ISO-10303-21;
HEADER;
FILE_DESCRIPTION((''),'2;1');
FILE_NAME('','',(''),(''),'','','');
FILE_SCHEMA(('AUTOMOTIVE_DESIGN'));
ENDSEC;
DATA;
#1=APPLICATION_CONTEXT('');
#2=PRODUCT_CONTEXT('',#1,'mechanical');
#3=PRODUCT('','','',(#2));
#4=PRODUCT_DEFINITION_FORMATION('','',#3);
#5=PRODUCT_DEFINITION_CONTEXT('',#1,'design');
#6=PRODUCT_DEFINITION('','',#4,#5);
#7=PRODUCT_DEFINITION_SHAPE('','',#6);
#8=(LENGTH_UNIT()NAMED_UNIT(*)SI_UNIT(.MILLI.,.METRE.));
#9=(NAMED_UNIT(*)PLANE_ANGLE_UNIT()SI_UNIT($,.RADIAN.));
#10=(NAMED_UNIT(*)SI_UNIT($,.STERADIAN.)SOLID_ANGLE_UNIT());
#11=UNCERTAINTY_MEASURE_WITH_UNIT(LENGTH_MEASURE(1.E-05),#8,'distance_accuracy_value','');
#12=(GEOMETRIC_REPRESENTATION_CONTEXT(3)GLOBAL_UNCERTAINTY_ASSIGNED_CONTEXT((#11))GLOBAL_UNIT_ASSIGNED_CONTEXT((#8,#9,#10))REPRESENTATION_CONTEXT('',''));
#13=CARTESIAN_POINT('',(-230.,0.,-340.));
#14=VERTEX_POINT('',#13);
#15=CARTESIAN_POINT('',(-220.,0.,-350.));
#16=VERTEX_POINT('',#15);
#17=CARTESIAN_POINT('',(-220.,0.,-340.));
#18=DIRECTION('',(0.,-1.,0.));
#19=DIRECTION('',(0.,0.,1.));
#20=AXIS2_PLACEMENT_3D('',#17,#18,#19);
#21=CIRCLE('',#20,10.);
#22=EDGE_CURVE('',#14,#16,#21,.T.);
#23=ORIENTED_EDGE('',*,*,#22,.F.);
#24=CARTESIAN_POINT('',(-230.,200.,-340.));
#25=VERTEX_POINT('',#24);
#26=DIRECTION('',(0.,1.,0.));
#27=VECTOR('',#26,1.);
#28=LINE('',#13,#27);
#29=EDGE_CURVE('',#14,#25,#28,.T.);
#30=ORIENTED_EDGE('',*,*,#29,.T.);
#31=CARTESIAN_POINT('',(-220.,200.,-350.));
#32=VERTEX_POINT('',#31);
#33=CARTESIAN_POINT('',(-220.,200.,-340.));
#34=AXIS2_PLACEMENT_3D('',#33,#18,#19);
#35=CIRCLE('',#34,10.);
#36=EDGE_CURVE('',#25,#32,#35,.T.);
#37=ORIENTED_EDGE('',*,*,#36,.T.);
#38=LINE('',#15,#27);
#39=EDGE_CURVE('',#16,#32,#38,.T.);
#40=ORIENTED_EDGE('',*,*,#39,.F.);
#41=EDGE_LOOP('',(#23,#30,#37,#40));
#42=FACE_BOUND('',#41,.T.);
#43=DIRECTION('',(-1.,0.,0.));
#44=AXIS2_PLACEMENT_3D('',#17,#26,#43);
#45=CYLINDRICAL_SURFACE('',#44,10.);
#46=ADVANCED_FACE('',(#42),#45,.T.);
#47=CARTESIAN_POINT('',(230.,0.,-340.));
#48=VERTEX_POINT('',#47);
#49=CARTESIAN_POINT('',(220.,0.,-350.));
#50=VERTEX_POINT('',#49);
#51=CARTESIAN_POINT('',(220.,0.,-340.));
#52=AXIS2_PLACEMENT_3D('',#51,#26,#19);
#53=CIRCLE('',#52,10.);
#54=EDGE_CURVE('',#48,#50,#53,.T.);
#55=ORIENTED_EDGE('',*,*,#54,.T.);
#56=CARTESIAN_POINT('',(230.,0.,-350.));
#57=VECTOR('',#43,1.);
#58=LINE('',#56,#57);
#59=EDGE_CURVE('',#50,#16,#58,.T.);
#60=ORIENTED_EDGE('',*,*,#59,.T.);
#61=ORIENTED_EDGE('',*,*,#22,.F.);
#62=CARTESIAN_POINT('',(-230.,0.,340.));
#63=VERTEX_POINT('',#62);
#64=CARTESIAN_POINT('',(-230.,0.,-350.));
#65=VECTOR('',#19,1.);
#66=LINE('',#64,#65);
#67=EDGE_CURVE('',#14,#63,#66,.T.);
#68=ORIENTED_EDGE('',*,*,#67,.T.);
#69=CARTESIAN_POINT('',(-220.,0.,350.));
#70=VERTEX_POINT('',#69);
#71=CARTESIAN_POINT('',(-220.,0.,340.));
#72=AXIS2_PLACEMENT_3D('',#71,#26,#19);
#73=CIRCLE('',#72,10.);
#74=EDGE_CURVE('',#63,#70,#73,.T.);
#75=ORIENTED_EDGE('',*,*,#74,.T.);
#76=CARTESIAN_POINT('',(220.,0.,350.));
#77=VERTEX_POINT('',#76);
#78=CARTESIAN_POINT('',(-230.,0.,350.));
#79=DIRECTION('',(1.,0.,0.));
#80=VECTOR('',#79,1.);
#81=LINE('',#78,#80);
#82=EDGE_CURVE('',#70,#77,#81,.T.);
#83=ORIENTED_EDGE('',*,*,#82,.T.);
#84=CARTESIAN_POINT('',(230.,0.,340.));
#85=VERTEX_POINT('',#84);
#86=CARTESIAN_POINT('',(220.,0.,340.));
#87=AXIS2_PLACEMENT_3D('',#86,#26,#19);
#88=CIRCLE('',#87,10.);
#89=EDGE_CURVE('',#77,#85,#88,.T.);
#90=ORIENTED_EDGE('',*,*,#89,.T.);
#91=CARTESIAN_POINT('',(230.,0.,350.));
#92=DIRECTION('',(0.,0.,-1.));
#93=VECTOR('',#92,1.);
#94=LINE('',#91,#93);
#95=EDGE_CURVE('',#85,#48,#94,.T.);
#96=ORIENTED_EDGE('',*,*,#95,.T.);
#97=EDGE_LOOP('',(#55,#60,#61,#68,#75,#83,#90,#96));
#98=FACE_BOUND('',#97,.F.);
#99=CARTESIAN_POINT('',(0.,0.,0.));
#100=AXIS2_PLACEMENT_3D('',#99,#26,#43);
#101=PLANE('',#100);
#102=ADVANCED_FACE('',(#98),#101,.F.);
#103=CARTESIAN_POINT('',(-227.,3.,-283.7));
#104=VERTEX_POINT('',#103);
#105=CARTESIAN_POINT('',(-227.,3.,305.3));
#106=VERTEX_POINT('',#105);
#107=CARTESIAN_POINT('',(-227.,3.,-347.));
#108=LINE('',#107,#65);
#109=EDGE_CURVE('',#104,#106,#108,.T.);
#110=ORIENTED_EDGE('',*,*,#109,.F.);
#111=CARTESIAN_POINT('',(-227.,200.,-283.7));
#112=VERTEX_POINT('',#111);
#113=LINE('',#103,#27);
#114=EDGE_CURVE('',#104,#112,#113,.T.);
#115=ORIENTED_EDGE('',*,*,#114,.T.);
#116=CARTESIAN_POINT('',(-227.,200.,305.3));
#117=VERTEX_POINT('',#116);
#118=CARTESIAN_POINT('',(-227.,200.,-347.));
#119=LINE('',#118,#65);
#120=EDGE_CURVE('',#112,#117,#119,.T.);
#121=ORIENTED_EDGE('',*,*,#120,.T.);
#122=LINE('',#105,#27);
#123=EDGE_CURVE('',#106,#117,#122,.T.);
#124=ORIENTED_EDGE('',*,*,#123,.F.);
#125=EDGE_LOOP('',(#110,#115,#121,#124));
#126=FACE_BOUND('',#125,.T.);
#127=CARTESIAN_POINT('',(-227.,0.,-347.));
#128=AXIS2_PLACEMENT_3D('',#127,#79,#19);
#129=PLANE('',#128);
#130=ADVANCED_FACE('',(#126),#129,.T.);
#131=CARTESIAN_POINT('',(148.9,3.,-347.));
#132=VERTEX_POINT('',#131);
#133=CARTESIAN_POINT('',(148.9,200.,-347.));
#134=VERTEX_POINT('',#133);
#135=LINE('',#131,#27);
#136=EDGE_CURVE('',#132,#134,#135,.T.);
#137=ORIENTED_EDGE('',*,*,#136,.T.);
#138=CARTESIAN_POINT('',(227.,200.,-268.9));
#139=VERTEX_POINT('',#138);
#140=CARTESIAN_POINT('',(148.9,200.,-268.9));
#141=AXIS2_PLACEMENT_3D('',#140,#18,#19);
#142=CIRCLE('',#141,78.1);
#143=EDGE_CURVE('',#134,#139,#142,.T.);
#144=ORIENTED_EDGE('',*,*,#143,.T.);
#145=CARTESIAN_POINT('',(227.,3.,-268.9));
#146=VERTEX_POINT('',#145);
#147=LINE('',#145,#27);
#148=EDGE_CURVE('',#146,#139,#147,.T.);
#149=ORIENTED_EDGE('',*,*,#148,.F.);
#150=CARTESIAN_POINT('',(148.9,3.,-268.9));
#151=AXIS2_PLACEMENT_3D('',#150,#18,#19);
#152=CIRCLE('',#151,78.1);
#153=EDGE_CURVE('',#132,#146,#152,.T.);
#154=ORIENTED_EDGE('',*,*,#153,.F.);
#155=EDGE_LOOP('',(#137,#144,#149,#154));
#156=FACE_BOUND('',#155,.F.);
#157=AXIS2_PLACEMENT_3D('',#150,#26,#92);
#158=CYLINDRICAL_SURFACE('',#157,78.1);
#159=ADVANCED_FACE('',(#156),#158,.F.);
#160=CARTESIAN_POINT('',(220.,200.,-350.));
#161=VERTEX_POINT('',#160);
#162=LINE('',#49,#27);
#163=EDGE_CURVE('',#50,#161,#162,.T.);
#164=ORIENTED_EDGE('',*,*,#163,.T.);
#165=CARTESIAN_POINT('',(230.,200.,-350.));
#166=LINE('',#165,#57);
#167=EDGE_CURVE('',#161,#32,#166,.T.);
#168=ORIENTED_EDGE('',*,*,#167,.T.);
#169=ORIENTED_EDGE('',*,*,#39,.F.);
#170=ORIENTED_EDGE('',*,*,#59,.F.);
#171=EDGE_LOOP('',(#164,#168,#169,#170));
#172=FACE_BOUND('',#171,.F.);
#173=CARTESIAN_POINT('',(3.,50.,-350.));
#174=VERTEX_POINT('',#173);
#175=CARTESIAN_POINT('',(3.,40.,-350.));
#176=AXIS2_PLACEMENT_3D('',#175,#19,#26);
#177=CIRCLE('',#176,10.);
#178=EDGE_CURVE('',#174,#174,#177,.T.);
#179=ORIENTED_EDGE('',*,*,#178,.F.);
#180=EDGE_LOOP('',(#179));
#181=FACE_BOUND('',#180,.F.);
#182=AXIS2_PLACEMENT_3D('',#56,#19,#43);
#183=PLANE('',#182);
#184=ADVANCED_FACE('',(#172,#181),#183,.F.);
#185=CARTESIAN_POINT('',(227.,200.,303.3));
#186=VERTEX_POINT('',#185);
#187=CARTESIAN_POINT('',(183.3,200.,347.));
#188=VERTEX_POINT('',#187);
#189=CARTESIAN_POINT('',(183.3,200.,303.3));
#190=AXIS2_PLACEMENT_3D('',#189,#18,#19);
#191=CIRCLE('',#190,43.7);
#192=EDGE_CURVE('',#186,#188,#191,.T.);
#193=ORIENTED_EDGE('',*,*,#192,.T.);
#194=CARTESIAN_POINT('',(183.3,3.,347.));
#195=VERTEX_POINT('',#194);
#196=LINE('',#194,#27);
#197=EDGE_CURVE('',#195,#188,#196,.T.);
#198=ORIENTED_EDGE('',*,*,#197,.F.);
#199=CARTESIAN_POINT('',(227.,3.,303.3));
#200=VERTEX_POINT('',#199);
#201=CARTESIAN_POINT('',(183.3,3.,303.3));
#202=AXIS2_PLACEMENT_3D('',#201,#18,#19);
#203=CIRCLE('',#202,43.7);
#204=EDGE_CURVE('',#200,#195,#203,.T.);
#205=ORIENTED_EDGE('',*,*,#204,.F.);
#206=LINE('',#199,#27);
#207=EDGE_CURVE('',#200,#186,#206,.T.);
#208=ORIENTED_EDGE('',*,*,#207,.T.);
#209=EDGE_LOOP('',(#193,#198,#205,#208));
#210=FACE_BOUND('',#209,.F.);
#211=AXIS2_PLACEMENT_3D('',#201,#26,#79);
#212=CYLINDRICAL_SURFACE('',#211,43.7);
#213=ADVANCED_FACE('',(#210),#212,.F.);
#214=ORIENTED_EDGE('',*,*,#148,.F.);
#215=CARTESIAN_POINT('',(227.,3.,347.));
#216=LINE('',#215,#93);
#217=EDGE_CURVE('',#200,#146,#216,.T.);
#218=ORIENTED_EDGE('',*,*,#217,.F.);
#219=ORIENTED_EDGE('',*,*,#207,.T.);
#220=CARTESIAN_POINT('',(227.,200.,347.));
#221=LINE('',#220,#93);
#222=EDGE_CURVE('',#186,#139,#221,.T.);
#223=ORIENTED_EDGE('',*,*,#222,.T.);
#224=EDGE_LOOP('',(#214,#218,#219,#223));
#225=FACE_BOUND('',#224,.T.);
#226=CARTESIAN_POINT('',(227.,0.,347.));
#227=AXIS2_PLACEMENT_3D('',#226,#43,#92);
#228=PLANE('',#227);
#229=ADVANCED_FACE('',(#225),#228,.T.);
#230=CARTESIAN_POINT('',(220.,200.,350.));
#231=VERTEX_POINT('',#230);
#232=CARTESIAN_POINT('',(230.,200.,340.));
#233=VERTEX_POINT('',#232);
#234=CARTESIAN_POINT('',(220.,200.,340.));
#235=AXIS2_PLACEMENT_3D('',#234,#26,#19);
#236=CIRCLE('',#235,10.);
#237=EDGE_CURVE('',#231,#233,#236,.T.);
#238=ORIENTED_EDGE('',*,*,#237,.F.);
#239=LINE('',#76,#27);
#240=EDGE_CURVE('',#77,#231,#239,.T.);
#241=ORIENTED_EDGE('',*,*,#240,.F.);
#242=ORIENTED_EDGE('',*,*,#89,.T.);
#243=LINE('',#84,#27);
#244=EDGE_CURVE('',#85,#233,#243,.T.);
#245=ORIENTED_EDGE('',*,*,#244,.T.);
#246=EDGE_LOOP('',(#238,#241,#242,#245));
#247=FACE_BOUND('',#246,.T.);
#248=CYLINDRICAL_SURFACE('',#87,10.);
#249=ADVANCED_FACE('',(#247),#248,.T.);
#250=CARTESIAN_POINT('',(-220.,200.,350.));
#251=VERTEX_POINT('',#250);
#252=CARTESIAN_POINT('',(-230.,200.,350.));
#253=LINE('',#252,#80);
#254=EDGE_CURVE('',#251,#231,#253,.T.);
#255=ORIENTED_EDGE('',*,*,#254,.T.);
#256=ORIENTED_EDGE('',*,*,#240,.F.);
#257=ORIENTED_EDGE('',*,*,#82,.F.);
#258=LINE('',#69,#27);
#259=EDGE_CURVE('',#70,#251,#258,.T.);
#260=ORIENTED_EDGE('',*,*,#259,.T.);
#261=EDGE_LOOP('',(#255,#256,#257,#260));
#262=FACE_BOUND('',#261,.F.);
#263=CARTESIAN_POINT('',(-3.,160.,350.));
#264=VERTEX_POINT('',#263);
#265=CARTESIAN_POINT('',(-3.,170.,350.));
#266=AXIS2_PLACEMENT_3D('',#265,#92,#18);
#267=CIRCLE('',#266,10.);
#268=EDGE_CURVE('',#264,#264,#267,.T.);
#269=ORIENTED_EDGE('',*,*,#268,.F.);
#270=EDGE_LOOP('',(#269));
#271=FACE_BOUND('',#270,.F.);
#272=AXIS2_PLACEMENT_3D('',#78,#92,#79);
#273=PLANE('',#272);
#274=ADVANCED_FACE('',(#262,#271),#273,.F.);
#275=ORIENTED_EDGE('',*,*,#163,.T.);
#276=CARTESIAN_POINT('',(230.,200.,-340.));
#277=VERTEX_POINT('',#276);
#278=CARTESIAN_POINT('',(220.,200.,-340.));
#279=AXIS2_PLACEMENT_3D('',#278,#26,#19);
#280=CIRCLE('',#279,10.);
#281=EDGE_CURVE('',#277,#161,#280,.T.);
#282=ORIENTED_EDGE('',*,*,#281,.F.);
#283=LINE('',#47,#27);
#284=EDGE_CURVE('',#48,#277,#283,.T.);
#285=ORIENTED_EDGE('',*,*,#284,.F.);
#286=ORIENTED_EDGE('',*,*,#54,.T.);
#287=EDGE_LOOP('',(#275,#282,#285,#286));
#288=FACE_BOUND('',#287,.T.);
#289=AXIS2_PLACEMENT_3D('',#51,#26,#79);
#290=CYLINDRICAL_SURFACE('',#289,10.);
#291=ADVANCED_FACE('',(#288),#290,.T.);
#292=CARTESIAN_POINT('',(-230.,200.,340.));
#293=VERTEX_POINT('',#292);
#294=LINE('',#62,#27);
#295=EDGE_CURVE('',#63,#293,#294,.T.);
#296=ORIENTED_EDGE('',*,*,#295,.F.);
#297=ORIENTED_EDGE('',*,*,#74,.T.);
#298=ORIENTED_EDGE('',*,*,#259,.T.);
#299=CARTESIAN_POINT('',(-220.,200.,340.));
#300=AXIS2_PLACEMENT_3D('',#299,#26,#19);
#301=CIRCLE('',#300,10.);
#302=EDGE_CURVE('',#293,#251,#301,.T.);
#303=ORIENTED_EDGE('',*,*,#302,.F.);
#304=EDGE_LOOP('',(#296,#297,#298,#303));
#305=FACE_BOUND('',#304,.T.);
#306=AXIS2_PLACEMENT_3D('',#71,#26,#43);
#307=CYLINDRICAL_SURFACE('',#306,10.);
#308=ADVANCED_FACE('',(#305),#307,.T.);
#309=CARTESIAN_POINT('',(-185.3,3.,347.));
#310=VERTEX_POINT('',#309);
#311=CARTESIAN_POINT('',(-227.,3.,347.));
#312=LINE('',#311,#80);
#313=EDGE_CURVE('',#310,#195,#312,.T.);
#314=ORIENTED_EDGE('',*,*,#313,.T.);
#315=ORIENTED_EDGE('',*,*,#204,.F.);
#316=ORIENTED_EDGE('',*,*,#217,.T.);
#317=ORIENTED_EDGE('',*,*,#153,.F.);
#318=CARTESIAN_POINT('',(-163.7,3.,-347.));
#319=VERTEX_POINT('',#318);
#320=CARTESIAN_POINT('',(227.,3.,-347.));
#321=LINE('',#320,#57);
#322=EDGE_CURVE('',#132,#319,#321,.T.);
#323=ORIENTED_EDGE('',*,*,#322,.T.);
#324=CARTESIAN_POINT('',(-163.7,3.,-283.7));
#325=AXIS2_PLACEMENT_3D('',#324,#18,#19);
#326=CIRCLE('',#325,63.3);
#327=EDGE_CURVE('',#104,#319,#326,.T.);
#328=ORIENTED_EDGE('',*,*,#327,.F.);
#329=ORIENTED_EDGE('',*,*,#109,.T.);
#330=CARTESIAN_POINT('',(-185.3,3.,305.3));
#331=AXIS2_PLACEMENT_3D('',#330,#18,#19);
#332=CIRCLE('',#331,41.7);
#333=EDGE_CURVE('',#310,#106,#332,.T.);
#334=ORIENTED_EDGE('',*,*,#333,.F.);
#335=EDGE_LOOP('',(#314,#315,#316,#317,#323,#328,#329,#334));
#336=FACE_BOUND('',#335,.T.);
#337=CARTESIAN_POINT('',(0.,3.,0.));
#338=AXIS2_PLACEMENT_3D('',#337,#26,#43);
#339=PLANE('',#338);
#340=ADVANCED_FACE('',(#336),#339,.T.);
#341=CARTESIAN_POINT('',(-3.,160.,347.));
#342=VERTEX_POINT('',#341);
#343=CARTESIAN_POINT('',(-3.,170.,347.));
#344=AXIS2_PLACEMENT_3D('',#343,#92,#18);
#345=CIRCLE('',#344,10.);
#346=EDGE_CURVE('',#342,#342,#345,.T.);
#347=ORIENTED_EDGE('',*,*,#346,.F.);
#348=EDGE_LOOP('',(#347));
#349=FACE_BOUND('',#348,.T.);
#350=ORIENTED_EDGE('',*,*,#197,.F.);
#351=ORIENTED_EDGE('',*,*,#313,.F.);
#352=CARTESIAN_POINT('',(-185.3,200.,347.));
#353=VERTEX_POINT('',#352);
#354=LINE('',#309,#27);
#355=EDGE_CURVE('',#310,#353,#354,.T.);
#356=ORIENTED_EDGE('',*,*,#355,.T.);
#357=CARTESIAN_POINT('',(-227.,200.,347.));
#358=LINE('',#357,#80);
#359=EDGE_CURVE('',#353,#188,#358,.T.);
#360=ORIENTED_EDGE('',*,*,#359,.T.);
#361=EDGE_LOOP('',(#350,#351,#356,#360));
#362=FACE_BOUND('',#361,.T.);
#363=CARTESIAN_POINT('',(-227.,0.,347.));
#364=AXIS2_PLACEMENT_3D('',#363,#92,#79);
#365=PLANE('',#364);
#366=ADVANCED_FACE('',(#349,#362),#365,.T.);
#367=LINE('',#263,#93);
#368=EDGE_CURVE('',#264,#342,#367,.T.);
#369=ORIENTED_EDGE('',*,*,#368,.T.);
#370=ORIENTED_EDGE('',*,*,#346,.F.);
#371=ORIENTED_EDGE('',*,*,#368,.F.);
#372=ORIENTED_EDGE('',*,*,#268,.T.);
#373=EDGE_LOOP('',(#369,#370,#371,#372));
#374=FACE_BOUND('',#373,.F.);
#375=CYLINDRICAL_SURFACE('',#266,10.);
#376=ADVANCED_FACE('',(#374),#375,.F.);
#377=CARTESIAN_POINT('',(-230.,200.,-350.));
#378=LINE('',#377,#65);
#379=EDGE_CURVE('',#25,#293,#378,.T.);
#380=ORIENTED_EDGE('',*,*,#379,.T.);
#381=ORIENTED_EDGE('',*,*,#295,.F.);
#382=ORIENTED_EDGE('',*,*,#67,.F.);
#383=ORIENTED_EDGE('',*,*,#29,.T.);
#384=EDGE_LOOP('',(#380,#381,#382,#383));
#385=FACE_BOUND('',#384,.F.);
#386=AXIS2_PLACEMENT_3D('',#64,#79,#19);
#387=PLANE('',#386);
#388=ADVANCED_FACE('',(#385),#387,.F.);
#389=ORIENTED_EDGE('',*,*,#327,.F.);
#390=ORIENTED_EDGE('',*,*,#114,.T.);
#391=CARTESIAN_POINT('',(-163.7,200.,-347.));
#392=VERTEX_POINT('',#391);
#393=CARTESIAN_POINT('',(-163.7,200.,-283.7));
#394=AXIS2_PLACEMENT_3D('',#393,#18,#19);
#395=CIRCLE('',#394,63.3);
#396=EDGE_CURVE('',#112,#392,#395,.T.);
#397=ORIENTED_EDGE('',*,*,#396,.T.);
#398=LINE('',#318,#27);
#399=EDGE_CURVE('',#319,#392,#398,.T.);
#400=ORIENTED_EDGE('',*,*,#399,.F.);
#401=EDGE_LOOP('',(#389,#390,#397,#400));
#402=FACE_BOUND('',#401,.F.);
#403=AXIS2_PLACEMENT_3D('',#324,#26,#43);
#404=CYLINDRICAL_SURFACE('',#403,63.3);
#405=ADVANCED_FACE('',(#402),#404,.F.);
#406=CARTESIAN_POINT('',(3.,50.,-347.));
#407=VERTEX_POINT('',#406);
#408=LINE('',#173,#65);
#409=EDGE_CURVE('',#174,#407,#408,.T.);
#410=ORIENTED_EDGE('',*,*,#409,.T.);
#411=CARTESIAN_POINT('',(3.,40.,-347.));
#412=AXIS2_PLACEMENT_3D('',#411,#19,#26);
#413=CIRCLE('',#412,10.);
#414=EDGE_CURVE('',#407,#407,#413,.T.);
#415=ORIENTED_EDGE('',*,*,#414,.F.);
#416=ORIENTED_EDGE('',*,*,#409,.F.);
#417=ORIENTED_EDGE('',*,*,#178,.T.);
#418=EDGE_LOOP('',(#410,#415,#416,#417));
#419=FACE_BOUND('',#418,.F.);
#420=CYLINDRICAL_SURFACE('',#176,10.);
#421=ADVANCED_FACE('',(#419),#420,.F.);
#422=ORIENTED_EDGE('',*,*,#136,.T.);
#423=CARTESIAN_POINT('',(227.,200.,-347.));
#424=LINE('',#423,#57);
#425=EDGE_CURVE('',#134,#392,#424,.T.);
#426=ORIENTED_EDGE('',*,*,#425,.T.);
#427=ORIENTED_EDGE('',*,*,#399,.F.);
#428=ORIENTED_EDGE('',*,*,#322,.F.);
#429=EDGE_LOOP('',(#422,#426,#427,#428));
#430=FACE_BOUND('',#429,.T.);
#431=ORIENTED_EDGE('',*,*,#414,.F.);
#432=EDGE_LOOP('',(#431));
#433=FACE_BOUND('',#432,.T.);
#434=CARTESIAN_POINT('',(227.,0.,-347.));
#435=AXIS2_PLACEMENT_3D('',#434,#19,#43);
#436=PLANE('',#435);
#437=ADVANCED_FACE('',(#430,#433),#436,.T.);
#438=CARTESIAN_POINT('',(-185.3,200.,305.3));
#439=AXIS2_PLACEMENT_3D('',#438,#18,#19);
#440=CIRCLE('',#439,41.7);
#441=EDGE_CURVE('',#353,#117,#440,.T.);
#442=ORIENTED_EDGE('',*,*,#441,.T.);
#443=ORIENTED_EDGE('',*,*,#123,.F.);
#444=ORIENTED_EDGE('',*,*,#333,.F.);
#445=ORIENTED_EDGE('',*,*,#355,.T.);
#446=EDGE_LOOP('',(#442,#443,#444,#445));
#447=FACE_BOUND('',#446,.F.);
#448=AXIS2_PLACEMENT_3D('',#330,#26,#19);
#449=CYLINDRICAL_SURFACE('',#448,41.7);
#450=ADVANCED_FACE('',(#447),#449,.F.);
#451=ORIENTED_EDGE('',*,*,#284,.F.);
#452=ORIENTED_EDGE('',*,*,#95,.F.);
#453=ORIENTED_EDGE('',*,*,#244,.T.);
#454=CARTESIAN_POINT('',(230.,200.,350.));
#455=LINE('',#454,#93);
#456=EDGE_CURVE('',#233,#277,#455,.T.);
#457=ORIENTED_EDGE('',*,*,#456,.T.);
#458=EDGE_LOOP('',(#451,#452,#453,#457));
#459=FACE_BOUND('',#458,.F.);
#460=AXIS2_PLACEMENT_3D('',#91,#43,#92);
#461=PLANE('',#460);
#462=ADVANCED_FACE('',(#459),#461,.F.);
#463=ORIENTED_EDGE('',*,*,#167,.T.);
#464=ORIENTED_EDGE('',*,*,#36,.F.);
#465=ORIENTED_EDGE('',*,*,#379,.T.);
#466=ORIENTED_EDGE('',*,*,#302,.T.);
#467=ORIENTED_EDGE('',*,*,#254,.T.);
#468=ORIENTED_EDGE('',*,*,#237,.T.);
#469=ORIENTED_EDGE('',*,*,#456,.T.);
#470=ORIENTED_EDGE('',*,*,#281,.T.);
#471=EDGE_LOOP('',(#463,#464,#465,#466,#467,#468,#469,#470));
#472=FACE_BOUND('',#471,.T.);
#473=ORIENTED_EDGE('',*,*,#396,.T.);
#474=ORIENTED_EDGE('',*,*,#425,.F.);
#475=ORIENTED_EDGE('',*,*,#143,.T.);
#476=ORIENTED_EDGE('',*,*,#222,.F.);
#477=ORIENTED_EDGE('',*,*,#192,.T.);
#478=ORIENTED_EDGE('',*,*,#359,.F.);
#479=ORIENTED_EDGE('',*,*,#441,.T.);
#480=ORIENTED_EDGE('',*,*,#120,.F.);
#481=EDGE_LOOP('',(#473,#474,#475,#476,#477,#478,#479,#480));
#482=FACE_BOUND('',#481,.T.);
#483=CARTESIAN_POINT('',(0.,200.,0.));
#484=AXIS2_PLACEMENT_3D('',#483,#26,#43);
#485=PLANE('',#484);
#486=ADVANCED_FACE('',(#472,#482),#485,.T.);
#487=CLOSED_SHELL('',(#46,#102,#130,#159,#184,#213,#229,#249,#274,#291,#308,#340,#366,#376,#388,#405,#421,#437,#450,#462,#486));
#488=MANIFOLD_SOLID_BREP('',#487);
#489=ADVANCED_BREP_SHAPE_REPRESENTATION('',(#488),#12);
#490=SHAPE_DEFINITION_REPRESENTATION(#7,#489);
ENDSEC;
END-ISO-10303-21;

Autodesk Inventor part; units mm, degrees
ref_plane "YZ Plane" through (0, 0, 0) normal (1, 0, 0) x (0, 1, 0)
ref_plane "XZ Plane" through (0, 0, 0) normal (0, 1, 0) x (-1, 0, 0)
ref_plane "XY Plane" through (0, 0, 0) normal (0, 0, 1) x (1, 0, 0)
sketch "Sketch1" plane through (0, 0, 0) normal (0, 1, 0) x (-1, 0, 0)
  line L0 (230, 350) -> (-230, 350)
  line L1 (-230, 350) -> (-230, -350)
  line L2 (-230, -350) -> (230, -350)
  line L3 (230, -350) -> (230, 350)
  line L4 (230, 350) -> (-230, -350) construction
  line L5 (-230, 350) -> (230, -350) construction
  line L6 (227, 347) -> (-227, 347)
  line L7 (-227, 347) -> (-227, -347)
  line L8 (-227, -347) -> (227, -347)
  line L9 (227, -347) -> (227, 347)
  line L10 (227, 347) -> (-227, -347) construction
  line L11 (-227, 347) -> (227, -347) construction
  point P0 (0, 0)
  dimension "d0" = 460
  dimension "d1" = 700
  dimension "d2" = 454
  dimension "d3" = 694
extrude "Extrusion1" add sketch "Sketch1" along normal blind 3 contours L9 L8 L7 L6
extrude "Extrusion2" add sketch "Sketch1" along normal blind 200
sketch "Sketch2" plane through (-230, 0, 350) normal (0, 0, 1) x (1, 0, 0)
  line L0 (0, 0) -> (460, 0) projected
  line L1 (0, 0) -> (0, 200) projected
  point P0 (230, 0)
  point P1 (227, 170)
  dimension "d15" = 170
  dimension "d16" = 227
hole "Hole1" at (-3, 170, 350) direction (0, 0, -1) diameter 20 depth 3 tip angle 118
sketch "Sketch3" plane through (230, 0, -350) normal (0, 0, -1) x (-1, 0, 0)
  line L0 (0, 0) -> (0, 200) projected
  line L1 (0, 0) -> (460, 0) projected
  point P0 (230, 0)
  point P1 (227, 40)
  dimension "d24" = 227
  dimension "d25" = 40
hole "Hole2" at (3, 40, -350) direction (0, 0, 1) diameter 20 depth 3 tip angle 118
fillet "Fillet1" radius 10 4 edges at (230, 100, 350) (230, 100, -350) (-230, 100, 350) (-230, 100, -350)
fillet "Fillet2" radius 41.7 1 edges at (-227, 101.5, 347)
fillet "Fillet3" radius 63.3 1 edges at (-227, 101.5, -347)
fillet "Fillet4" radius 78.1 1 edges at (227, 101.5, -347)
fillet "Fillet5" radius 43.7 1 edges at (227, 101.5, 347)
properties part number "Ammonia Filter Tub"
